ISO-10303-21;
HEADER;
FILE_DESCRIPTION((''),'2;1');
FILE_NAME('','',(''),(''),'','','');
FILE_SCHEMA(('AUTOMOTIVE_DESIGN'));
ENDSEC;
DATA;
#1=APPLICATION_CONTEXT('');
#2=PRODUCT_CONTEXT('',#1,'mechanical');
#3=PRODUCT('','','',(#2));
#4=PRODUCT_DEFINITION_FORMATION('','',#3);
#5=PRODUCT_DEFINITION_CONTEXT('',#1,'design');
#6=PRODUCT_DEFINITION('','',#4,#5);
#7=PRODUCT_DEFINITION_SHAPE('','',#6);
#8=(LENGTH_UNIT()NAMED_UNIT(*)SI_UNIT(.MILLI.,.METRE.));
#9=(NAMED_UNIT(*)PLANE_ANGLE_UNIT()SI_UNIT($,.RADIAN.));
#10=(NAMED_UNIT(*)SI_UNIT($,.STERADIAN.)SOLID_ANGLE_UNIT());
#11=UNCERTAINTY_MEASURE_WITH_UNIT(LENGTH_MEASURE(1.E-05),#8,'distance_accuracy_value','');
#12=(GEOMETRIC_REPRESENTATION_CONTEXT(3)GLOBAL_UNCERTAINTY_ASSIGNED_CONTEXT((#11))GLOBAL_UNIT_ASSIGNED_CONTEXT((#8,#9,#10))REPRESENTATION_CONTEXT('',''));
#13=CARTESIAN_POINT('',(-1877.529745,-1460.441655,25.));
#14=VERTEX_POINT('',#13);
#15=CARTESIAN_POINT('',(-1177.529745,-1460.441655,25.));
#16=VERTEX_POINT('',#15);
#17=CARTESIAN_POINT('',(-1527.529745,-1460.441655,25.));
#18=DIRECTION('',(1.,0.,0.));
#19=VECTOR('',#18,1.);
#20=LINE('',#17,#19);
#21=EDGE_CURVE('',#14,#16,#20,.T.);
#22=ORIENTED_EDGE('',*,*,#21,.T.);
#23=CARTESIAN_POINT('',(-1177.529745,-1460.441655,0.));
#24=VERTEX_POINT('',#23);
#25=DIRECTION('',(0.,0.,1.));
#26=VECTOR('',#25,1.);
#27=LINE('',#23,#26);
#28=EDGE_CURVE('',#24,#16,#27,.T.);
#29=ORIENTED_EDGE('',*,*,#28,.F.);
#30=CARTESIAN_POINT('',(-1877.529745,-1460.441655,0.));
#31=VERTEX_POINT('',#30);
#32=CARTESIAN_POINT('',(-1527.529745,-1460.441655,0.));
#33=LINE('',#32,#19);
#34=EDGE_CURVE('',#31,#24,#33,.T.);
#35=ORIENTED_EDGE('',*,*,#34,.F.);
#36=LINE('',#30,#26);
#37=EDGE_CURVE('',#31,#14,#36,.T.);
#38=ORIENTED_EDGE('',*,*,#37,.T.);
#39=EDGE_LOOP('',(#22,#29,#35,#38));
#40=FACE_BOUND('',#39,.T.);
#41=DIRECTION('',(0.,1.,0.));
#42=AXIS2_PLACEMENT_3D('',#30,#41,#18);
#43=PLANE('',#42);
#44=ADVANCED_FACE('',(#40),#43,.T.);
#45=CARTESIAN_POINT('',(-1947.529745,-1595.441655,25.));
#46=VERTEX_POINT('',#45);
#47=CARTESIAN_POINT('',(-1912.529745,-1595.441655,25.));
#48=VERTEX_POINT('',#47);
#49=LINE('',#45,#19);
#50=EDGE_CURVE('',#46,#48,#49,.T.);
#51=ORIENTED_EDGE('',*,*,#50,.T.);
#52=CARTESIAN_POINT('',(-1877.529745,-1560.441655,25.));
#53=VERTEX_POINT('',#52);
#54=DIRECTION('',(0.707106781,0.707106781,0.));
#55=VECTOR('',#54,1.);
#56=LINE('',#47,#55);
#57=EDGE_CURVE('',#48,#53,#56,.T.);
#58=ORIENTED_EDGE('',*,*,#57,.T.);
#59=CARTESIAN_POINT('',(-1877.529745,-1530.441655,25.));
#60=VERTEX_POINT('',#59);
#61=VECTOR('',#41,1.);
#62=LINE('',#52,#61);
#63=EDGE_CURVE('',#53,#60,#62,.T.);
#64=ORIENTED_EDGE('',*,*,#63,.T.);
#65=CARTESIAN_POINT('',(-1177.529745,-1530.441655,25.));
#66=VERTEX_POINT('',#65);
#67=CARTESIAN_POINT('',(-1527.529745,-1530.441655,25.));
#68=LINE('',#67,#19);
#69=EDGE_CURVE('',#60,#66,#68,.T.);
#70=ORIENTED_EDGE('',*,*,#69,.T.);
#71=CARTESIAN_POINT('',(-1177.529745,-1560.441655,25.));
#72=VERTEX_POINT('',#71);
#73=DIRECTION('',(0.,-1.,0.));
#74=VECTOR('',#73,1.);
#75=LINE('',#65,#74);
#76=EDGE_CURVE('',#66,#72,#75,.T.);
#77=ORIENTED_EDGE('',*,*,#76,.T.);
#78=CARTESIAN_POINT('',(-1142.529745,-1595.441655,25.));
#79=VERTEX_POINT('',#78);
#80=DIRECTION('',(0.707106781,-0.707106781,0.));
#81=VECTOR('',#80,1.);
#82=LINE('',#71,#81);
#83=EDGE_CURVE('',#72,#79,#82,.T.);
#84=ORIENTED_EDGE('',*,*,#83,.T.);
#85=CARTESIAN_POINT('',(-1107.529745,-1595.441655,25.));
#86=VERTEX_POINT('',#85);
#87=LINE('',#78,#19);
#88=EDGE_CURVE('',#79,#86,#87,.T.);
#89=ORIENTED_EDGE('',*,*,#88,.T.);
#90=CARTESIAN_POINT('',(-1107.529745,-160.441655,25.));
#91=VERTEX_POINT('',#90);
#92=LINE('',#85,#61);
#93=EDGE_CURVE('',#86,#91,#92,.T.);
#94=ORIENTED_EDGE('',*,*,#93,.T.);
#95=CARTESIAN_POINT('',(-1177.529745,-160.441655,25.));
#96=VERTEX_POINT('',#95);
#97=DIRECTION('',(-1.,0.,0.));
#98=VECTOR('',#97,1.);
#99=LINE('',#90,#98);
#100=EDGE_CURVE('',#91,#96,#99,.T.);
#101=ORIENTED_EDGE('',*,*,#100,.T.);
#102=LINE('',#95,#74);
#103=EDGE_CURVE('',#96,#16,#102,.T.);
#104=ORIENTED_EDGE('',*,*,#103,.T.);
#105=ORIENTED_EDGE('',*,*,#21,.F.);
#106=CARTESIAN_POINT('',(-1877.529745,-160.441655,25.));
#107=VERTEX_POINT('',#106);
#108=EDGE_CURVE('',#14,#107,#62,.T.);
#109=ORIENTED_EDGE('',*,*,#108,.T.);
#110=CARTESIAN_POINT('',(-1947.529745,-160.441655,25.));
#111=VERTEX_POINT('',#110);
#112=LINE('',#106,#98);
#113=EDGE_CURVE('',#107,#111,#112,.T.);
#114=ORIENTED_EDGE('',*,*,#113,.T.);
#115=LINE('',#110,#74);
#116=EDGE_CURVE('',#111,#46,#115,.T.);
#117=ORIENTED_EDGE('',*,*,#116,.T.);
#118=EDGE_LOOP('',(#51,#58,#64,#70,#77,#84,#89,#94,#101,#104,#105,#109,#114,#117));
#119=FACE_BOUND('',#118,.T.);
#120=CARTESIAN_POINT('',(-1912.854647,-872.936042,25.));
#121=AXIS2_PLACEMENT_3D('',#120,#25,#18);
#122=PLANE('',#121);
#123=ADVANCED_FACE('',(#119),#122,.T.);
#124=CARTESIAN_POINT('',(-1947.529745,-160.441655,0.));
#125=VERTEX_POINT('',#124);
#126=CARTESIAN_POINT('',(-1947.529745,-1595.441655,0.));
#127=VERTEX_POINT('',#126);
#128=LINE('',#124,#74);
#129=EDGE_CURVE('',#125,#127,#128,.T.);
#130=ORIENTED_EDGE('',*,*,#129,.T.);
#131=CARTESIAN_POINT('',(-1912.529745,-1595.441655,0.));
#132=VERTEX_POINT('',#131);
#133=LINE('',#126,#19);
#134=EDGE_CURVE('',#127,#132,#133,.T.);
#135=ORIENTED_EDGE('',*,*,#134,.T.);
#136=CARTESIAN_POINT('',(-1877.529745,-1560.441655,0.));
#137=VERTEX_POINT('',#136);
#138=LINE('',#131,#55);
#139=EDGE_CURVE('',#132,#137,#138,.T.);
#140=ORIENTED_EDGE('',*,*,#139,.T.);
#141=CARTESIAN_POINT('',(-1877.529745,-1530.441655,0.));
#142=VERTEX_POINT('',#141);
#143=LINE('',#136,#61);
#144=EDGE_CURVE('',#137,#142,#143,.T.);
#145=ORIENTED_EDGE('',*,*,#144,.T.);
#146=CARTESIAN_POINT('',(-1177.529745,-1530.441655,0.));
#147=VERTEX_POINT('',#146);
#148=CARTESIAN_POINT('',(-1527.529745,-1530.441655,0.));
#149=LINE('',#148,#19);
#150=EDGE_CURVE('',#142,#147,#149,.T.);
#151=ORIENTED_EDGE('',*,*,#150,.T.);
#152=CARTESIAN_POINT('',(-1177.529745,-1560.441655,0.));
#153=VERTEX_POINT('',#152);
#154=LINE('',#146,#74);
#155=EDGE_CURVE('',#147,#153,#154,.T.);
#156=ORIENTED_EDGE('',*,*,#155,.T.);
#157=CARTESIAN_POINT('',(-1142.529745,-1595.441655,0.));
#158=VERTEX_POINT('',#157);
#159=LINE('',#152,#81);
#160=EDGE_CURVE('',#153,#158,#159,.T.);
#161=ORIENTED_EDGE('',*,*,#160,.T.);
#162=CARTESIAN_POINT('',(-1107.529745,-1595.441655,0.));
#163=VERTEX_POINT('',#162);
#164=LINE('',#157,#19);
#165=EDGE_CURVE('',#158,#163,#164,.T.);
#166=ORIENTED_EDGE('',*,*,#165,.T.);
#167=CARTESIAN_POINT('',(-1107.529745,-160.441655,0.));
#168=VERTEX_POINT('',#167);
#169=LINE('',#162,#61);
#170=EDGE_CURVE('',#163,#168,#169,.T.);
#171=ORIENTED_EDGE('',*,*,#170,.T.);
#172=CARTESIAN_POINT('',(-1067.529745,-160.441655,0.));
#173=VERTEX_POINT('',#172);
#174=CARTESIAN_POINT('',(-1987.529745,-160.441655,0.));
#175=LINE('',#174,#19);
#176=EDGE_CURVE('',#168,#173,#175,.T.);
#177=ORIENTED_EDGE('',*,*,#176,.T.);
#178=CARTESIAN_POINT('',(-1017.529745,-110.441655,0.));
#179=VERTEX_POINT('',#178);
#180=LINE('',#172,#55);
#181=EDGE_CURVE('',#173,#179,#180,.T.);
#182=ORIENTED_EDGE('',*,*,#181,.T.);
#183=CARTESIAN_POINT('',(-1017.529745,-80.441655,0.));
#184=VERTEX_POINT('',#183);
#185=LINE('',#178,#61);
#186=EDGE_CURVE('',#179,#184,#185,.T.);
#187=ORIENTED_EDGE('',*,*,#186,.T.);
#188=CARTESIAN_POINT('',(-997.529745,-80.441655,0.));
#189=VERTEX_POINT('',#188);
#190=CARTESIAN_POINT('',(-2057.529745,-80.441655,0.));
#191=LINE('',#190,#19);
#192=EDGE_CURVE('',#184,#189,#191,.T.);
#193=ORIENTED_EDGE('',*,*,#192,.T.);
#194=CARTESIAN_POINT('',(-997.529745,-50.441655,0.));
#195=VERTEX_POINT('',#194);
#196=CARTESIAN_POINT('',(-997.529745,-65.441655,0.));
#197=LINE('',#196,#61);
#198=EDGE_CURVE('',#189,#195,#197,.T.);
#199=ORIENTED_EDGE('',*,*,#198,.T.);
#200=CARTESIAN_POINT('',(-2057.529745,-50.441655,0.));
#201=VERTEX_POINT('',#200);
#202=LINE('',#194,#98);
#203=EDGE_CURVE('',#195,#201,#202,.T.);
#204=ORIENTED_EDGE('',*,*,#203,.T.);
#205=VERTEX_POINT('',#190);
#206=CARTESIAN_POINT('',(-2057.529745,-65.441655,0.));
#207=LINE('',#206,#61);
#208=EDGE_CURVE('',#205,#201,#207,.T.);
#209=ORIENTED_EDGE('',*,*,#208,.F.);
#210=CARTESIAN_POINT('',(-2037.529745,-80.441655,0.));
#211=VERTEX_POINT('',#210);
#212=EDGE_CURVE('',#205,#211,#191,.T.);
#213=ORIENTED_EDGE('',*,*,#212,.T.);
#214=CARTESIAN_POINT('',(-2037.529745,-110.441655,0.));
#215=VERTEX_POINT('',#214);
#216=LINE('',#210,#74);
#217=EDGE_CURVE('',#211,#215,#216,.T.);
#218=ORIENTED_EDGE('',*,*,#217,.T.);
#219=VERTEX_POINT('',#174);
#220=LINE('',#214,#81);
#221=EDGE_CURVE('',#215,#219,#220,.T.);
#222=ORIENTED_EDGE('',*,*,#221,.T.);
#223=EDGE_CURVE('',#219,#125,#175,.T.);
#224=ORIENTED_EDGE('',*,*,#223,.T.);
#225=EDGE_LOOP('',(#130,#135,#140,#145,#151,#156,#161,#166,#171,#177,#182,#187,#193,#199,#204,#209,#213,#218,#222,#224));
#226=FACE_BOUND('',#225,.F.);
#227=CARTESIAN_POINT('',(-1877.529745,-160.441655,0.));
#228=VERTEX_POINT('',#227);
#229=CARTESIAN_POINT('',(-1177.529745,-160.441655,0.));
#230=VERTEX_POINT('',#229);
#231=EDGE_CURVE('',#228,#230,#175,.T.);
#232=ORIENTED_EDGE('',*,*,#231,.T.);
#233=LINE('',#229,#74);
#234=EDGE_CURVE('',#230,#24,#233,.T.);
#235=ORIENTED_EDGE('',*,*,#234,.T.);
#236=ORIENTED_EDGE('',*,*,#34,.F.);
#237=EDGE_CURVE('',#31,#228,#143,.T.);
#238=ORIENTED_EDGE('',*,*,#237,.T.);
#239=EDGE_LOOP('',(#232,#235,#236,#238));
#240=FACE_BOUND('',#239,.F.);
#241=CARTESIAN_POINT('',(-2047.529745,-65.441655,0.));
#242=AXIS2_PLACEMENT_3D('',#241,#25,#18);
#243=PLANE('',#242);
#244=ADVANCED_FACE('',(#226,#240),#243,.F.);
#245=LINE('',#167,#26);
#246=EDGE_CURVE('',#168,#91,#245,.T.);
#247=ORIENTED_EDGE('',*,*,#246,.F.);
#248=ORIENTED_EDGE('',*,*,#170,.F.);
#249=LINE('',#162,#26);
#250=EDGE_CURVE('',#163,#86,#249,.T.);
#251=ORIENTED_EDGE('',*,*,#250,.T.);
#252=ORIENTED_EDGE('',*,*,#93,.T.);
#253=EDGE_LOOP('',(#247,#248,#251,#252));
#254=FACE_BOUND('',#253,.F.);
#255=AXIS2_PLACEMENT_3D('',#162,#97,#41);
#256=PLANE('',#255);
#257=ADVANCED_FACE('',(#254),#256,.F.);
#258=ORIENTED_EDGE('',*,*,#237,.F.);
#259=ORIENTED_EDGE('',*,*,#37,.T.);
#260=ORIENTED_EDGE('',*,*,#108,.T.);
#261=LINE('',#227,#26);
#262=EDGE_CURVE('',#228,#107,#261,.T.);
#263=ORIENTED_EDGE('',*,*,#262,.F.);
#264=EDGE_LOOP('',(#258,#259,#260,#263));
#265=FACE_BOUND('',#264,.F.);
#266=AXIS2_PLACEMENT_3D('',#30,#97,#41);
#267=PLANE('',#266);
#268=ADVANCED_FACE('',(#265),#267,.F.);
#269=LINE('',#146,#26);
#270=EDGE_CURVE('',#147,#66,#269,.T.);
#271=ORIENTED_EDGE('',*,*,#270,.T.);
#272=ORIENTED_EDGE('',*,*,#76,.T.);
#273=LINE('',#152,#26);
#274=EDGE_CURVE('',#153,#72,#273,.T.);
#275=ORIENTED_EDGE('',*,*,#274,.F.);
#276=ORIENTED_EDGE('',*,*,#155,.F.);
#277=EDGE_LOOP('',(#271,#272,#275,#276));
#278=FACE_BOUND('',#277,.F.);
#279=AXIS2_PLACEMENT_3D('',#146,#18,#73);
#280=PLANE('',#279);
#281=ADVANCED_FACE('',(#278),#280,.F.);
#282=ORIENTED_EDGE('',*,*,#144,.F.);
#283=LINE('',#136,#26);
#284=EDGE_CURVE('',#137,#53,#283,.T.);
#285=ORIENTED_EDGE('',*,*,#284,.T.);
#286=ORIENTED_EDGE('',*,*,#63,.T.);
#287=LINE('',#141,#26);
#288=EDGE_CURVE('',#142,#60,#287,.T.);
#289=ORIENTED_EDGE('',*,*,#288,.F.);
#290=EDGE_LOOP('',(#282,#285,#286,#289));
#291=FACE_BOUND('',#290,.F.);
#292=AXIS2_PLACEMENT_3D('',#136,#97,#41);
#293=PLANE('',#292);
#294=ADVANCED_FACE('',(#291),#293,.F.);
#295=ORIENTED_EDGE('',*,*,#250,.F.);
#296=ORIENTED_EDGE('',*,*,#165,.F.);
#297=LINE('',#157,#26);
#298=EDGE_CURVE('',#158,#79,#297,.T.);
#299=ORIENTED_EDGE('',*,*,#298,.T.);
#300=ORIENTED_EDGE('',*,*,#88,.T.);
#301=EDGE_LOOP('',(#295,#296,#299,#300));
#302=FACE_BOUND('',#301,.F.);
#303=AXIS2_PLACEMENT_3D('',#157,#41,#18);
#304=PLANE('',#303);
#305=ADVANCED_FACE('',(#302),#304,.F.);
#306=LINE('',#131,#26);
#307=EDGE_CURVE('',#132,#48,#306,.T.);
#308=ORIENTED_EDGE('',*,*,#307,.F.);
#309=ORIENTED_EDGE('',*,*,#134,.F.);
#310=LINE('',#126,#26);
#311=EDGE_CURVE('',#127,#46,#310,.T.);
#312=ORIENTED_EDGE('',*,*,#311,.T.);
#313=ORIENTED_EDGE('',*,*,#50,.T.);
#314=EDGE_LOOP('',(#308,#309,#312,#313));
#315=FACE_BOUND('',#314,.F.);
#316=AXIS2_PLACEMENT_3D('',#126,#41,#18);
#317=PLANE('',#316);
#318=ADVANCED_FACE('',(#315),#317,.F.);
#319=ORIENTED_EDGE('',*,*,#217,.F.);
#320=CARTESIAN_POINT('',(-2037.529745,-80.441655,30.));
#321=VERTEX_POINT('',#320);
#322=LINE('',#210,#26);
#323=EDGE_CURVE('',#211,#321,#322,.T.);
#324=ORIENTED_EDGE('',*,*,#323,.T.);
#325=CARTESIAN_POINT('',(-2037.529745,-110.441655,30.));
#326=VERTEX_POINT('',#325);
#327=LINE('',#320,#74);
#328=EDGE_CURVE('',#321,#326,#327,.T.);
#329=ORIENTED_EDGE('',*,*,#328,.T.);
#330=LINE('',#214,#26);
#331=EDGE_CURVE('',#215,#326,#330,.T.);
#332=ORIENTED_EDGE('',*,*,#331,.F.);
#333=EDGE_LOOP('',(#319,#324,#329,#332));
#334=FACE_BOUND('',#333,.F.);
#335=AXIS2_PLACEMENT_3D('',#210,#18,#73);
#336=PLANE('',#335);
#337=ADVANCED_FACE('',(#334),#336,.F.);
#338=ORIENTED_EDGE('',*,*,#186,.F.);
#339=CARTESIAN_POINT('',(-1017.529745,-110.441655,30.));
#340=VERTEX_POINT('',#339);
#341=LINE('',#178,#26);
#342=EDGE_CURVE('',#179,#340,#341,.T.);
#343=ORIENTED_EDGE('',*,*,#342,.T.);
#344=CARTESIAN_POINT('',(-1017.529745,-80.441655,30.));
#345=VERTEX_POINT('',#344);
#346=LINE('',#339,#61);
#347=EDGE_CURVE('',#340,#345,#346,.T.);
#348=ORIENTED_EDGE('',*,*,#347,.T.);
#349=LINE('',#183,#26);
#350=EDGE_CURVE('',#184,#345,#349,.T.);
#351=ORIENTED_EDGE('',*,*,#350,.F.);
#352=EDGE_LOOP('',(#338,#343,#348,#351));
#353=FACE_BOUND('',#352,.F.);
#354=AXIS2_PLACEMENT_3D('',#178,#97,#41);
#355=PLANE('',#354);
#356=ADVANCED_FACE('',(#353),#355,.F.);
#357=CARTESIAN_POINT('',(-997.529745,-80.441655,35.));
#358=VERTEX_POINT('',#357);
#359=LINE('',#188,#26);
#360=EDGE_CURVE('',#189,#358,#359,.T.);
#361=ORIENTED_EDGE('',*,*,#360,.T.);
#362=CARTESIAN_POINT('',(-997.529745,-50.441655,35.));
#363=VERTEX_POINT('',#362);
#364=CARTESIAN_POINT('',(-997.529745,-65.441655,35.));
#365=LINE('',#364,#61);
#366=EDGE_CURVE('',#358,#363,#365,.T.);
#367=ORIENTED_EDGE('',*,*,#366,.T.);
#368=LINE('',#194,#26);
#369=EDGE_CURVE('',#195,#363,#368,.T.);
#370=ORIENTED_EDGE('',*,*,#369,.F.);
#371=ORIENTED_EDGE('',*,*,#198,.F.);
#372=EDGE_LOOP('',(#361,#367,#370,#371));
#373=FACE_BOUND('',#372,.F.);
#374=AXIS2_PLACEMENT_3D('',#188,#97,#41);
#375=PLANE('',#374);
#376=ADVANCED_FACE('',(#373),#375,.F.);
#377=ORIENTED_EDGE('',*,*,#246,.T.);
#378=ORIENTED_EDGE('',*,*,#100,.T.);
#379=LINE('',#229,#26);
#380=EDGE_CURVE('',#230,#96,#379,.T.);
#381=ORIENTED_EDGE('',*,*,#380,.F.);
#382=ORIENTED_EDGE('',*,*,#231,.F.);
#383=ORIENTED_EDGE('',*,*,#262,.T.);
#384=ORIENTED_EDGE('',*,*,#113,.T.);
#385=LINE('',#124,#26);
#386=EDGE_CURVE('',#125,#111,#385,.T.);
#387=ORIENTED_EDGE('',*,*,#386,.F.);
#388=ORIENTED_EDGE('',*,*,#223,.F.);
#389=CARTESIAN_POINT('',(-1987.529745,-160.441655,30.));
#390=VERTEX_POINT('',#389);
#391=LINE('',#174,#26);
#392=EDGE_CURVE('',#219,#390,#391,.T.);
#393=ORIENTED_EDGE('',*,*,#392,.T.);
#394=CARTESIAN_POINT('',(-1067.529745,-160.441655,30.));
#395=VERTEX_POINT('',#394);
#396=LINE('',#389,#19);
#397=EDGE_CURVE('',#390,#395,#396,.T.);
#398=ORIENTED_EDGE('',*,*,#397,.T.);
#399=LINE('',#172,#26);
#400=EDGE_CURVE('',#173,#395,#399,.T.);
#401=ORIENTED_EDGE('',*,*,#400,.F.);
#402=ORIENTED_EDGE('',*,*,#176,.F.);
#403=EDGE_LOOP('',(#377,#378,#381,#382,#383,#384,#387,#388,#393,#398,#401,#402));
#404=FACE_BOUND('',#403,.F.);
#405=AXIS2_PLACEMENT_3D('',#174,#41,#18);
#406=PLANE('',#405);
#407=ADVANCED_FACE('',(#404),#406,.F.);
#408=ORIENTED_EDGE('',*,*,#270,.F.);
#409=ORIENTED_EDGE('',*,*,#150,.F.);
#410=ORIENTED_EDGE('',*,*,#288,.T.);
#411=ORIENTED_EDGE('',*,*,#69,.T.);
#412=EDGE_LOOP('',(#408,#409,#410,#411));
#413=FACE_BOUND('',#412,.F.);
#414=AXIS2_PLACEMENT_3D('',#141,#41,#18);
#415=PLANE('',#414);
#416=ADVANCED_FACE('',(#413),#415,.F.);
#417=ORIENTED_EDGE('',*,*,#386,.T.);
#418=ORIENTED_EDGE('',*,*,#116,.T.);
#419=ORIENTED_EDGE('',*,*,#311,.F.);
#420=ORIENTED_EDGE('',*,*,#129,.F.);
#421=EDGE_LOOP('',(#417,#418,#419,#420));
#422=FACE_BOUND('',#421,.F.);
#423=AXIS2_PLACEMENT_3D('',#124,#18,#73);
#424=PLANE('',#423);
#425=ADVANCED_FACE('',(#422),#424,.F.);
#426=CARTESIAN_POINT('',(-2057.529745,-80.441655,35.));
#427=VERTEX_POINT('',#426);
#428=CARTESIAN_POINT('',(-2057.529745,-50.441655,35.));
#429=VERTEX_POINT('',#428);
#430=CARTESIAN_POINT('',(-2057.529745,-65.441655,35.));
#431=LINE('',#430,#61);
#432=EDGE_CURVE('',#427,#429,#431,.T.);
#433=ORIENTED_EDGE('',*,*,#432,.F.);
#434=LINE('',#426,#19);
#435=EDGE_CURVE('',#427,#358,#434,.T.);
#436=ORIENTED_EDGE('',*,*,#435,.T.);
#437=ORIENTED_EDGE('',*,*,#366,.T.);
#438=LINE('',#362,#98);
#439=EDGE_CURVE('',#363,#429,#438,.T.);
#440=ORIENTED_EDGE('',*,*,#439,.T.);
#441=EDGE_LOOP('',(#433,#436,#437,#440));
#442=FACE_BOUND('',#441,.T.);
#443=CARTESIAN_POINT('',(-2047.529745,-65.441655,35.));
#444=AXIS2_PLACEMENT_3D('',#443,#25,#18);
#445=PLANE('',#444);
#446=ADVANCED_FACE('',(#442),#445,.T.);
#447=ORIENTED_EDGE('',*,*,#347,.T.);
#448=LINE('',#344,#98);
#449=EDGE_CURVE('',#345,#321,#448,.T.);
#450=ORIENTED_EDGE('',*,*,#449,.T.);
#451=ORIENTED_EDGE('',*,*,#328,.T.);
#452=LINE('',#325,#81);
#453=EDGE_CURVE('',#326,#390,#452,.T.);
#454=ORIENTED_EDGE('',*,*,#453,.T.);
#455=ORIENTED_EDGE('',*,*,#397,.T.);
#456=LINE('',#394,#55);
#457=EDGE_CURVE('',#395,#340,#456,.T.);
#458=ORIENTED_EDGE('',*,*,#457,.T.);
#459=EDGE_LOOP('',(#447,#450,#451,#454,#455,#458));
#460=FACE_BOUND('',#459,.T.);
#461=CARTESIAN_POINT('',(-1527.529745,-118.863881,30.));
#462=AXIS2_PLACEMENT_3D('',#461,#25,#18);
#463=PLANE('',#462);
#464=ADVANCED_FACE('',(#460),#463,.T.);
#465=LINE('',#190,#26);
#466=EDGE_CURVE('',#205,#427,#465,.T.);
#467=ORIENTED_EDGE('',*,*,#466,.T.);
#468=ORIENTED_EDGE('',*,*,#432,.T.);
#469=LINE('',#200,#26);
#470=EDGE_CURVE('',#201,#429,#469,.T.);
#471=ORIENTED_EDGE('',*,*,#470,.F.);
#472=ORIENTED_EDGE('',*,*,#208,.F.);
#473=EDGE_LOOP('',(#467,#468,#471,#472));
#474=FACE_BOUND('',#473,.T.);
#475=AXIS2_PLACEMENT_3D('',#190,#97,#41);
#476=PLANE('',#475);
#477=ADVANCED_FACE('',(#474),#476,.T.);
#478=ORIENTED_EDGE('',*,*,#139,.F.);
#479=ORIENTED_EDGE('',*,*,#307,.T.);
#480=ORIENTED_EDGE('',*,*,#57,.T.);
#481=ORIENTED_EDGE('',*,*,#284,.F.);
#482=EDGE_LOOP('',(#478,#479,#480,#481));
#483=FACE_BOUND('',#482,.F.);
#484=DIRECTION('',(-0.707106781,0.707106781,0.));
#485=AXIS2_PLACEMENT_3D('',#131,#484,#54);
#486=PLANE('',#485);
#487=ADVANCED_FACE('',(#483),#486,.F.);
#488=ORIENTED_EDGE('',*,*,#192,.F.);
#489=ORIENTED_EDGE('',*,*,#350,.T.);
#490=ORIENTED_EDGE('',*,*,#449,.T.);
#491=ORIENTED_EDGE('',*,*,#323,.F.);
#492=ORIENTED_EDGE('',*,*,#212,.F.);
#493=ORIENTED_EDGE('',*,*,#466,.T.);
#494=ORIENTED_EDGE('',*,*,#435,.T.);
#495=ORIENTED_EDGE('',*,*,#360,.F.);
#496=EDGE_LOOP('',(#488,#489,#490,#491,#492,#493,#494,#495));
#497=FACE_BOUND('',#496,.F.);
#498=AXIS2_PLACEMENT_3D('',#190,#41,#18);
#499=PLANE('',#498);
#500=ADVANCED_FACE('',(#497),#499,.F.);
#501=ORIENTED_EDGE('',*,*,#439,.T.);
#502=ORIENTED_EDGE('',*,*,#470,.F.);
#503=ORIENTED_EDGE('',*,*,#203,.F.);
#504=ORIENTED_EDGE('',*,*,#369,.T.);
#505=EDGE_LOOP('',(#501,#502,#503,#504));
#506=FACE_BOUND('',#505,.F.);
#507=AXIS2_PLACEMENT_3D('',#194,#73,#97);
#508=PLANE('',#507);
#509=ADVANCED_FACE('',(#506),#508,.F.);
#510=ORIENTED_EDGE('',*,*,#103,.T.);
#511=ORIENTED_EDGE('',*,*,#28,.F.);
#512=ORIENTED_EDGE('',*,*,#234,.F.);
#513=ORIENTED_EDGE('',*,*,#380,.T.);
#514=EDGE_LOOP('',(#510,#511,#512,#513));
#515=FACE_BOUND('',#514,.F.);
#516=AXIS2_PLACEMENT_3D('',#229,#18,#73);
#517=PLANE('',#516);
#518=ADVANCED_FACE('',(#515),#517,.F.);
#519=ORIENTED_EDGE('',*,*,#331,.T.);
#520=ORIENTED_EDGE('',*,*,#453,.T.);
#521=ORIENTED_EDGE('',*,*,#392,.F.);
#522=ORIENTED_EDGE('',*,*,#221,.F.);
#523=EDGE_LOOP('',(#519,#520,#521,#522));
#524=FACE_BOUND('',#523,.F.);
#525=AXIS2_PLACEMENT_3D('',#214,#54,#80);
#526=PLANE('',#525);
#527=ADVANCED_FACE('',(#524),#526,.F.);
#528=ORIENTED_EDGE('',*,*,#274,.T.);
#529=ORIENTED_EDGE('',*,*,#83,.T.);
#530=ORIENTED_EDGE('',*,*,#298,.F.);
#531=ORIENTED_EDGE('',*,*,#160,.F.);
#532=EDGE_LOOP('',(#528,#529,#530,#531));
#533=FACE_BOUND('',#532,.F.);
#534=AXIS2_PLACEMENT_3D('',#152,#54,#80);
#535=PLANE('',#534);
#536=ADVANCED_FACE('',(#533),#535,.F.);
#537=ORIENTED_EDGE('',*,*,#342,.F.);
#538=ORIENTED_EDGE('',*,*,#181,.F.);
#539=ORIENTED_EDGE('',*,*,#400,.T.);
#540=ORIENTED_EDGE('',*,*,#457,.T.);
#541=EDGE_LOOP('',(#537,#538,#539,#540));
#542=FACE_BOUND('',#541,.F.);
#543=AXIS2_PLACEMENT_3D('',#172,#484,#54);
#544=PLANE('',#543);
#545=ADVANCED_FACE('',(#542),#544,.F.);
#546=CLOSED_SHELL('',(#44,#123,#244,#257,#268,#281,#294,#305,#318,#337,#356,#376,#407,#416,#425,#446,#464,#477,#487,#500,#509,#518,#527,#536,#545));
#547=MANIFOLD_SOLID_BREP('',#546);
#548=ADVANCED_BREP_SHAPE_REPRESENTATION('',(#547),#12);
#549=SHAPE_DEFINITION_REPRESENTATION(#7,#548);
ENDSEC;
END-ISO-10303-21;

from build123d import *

# Parameters (mm, degrees)
F1_DEPTH = 30
F0_W     = 20
F0_H     = 30
F0_W_2   = 1020
F2_DEPTH = 35
F0_W_3   = 700
F0_H_2   = 70
F3_DEPTH = 25


with BuildPart() as f1:
    # F0 (on Top) → F1 (new body)
    with BuildSketch(Plane.XY):
        Polygon((-1947.5297451019, -160.4416549206), (-1877.5297451019, -160.4416549206), (-1177.5297451019, -160.4416549206), (-1107.5297451019, -160.4416549206), (-1067.5297451019, -160.4416549206), (-1017.5297451019, -110.4416549206), (-1017.5297451019, -80.4416549206), (-2037.5297451019, -80.4416549206), (-2037.5297451019, -110.4416549206), (-1987.5297451019, -160.4416549206), align=None)
    extrude(amount=F1_DEPTH)

    # F0 (on Top) → F2 (join)
    with BuildSketch(Plane.XY):
        with Locations((-2047.5297451019, -65.4416549206)):
            Rectangle(F0_W, F0_H)
        with Locations((-1527.5297451019, -65.4416549206)):
            Rectangle(F0_W_2, F0_H)
        with Locations((-1007.5297451019, -65.4416549206)):
            Rectangle(F0_W, F0_H)
    extrude(amount=F2_DEPTH)

    # F0 (on Top) → F3 (join)
    with BuildSketch(Plane.XY):
        Polygon((-1877.5297451019, -1460.4416549206), (-1877.5297451019, -160.4416549206), (-1947.5297451019, -160.4416549206), (-1947.5297451019, -1595.4416549206), (-1912.5297451019, -1595.4416549206), (-1877.5297451019, -1560.4416549206), (-1877.5297451019, -1530.4416549206), align=None)
        with Locations((-1527.5297451019, -1495.4416549206)):
            Rectangle(F0_W_3, F0_H_2)
        Polygon((-1107.5297451019, -160.4416549206), (-1177.5297451019, -160.4416549206), (-1177.5297451019, -1460.4416549206), (-1177.5297451019, -1530.4416549206), (-1177.5297451019, -1560.4416549206), (-1142.5297451019, -1595.4416549206), (-1107.5297451019, -1595.4416549206), align=None)
    extrude(amount=F3_DEPTH)


solid = f1.part
